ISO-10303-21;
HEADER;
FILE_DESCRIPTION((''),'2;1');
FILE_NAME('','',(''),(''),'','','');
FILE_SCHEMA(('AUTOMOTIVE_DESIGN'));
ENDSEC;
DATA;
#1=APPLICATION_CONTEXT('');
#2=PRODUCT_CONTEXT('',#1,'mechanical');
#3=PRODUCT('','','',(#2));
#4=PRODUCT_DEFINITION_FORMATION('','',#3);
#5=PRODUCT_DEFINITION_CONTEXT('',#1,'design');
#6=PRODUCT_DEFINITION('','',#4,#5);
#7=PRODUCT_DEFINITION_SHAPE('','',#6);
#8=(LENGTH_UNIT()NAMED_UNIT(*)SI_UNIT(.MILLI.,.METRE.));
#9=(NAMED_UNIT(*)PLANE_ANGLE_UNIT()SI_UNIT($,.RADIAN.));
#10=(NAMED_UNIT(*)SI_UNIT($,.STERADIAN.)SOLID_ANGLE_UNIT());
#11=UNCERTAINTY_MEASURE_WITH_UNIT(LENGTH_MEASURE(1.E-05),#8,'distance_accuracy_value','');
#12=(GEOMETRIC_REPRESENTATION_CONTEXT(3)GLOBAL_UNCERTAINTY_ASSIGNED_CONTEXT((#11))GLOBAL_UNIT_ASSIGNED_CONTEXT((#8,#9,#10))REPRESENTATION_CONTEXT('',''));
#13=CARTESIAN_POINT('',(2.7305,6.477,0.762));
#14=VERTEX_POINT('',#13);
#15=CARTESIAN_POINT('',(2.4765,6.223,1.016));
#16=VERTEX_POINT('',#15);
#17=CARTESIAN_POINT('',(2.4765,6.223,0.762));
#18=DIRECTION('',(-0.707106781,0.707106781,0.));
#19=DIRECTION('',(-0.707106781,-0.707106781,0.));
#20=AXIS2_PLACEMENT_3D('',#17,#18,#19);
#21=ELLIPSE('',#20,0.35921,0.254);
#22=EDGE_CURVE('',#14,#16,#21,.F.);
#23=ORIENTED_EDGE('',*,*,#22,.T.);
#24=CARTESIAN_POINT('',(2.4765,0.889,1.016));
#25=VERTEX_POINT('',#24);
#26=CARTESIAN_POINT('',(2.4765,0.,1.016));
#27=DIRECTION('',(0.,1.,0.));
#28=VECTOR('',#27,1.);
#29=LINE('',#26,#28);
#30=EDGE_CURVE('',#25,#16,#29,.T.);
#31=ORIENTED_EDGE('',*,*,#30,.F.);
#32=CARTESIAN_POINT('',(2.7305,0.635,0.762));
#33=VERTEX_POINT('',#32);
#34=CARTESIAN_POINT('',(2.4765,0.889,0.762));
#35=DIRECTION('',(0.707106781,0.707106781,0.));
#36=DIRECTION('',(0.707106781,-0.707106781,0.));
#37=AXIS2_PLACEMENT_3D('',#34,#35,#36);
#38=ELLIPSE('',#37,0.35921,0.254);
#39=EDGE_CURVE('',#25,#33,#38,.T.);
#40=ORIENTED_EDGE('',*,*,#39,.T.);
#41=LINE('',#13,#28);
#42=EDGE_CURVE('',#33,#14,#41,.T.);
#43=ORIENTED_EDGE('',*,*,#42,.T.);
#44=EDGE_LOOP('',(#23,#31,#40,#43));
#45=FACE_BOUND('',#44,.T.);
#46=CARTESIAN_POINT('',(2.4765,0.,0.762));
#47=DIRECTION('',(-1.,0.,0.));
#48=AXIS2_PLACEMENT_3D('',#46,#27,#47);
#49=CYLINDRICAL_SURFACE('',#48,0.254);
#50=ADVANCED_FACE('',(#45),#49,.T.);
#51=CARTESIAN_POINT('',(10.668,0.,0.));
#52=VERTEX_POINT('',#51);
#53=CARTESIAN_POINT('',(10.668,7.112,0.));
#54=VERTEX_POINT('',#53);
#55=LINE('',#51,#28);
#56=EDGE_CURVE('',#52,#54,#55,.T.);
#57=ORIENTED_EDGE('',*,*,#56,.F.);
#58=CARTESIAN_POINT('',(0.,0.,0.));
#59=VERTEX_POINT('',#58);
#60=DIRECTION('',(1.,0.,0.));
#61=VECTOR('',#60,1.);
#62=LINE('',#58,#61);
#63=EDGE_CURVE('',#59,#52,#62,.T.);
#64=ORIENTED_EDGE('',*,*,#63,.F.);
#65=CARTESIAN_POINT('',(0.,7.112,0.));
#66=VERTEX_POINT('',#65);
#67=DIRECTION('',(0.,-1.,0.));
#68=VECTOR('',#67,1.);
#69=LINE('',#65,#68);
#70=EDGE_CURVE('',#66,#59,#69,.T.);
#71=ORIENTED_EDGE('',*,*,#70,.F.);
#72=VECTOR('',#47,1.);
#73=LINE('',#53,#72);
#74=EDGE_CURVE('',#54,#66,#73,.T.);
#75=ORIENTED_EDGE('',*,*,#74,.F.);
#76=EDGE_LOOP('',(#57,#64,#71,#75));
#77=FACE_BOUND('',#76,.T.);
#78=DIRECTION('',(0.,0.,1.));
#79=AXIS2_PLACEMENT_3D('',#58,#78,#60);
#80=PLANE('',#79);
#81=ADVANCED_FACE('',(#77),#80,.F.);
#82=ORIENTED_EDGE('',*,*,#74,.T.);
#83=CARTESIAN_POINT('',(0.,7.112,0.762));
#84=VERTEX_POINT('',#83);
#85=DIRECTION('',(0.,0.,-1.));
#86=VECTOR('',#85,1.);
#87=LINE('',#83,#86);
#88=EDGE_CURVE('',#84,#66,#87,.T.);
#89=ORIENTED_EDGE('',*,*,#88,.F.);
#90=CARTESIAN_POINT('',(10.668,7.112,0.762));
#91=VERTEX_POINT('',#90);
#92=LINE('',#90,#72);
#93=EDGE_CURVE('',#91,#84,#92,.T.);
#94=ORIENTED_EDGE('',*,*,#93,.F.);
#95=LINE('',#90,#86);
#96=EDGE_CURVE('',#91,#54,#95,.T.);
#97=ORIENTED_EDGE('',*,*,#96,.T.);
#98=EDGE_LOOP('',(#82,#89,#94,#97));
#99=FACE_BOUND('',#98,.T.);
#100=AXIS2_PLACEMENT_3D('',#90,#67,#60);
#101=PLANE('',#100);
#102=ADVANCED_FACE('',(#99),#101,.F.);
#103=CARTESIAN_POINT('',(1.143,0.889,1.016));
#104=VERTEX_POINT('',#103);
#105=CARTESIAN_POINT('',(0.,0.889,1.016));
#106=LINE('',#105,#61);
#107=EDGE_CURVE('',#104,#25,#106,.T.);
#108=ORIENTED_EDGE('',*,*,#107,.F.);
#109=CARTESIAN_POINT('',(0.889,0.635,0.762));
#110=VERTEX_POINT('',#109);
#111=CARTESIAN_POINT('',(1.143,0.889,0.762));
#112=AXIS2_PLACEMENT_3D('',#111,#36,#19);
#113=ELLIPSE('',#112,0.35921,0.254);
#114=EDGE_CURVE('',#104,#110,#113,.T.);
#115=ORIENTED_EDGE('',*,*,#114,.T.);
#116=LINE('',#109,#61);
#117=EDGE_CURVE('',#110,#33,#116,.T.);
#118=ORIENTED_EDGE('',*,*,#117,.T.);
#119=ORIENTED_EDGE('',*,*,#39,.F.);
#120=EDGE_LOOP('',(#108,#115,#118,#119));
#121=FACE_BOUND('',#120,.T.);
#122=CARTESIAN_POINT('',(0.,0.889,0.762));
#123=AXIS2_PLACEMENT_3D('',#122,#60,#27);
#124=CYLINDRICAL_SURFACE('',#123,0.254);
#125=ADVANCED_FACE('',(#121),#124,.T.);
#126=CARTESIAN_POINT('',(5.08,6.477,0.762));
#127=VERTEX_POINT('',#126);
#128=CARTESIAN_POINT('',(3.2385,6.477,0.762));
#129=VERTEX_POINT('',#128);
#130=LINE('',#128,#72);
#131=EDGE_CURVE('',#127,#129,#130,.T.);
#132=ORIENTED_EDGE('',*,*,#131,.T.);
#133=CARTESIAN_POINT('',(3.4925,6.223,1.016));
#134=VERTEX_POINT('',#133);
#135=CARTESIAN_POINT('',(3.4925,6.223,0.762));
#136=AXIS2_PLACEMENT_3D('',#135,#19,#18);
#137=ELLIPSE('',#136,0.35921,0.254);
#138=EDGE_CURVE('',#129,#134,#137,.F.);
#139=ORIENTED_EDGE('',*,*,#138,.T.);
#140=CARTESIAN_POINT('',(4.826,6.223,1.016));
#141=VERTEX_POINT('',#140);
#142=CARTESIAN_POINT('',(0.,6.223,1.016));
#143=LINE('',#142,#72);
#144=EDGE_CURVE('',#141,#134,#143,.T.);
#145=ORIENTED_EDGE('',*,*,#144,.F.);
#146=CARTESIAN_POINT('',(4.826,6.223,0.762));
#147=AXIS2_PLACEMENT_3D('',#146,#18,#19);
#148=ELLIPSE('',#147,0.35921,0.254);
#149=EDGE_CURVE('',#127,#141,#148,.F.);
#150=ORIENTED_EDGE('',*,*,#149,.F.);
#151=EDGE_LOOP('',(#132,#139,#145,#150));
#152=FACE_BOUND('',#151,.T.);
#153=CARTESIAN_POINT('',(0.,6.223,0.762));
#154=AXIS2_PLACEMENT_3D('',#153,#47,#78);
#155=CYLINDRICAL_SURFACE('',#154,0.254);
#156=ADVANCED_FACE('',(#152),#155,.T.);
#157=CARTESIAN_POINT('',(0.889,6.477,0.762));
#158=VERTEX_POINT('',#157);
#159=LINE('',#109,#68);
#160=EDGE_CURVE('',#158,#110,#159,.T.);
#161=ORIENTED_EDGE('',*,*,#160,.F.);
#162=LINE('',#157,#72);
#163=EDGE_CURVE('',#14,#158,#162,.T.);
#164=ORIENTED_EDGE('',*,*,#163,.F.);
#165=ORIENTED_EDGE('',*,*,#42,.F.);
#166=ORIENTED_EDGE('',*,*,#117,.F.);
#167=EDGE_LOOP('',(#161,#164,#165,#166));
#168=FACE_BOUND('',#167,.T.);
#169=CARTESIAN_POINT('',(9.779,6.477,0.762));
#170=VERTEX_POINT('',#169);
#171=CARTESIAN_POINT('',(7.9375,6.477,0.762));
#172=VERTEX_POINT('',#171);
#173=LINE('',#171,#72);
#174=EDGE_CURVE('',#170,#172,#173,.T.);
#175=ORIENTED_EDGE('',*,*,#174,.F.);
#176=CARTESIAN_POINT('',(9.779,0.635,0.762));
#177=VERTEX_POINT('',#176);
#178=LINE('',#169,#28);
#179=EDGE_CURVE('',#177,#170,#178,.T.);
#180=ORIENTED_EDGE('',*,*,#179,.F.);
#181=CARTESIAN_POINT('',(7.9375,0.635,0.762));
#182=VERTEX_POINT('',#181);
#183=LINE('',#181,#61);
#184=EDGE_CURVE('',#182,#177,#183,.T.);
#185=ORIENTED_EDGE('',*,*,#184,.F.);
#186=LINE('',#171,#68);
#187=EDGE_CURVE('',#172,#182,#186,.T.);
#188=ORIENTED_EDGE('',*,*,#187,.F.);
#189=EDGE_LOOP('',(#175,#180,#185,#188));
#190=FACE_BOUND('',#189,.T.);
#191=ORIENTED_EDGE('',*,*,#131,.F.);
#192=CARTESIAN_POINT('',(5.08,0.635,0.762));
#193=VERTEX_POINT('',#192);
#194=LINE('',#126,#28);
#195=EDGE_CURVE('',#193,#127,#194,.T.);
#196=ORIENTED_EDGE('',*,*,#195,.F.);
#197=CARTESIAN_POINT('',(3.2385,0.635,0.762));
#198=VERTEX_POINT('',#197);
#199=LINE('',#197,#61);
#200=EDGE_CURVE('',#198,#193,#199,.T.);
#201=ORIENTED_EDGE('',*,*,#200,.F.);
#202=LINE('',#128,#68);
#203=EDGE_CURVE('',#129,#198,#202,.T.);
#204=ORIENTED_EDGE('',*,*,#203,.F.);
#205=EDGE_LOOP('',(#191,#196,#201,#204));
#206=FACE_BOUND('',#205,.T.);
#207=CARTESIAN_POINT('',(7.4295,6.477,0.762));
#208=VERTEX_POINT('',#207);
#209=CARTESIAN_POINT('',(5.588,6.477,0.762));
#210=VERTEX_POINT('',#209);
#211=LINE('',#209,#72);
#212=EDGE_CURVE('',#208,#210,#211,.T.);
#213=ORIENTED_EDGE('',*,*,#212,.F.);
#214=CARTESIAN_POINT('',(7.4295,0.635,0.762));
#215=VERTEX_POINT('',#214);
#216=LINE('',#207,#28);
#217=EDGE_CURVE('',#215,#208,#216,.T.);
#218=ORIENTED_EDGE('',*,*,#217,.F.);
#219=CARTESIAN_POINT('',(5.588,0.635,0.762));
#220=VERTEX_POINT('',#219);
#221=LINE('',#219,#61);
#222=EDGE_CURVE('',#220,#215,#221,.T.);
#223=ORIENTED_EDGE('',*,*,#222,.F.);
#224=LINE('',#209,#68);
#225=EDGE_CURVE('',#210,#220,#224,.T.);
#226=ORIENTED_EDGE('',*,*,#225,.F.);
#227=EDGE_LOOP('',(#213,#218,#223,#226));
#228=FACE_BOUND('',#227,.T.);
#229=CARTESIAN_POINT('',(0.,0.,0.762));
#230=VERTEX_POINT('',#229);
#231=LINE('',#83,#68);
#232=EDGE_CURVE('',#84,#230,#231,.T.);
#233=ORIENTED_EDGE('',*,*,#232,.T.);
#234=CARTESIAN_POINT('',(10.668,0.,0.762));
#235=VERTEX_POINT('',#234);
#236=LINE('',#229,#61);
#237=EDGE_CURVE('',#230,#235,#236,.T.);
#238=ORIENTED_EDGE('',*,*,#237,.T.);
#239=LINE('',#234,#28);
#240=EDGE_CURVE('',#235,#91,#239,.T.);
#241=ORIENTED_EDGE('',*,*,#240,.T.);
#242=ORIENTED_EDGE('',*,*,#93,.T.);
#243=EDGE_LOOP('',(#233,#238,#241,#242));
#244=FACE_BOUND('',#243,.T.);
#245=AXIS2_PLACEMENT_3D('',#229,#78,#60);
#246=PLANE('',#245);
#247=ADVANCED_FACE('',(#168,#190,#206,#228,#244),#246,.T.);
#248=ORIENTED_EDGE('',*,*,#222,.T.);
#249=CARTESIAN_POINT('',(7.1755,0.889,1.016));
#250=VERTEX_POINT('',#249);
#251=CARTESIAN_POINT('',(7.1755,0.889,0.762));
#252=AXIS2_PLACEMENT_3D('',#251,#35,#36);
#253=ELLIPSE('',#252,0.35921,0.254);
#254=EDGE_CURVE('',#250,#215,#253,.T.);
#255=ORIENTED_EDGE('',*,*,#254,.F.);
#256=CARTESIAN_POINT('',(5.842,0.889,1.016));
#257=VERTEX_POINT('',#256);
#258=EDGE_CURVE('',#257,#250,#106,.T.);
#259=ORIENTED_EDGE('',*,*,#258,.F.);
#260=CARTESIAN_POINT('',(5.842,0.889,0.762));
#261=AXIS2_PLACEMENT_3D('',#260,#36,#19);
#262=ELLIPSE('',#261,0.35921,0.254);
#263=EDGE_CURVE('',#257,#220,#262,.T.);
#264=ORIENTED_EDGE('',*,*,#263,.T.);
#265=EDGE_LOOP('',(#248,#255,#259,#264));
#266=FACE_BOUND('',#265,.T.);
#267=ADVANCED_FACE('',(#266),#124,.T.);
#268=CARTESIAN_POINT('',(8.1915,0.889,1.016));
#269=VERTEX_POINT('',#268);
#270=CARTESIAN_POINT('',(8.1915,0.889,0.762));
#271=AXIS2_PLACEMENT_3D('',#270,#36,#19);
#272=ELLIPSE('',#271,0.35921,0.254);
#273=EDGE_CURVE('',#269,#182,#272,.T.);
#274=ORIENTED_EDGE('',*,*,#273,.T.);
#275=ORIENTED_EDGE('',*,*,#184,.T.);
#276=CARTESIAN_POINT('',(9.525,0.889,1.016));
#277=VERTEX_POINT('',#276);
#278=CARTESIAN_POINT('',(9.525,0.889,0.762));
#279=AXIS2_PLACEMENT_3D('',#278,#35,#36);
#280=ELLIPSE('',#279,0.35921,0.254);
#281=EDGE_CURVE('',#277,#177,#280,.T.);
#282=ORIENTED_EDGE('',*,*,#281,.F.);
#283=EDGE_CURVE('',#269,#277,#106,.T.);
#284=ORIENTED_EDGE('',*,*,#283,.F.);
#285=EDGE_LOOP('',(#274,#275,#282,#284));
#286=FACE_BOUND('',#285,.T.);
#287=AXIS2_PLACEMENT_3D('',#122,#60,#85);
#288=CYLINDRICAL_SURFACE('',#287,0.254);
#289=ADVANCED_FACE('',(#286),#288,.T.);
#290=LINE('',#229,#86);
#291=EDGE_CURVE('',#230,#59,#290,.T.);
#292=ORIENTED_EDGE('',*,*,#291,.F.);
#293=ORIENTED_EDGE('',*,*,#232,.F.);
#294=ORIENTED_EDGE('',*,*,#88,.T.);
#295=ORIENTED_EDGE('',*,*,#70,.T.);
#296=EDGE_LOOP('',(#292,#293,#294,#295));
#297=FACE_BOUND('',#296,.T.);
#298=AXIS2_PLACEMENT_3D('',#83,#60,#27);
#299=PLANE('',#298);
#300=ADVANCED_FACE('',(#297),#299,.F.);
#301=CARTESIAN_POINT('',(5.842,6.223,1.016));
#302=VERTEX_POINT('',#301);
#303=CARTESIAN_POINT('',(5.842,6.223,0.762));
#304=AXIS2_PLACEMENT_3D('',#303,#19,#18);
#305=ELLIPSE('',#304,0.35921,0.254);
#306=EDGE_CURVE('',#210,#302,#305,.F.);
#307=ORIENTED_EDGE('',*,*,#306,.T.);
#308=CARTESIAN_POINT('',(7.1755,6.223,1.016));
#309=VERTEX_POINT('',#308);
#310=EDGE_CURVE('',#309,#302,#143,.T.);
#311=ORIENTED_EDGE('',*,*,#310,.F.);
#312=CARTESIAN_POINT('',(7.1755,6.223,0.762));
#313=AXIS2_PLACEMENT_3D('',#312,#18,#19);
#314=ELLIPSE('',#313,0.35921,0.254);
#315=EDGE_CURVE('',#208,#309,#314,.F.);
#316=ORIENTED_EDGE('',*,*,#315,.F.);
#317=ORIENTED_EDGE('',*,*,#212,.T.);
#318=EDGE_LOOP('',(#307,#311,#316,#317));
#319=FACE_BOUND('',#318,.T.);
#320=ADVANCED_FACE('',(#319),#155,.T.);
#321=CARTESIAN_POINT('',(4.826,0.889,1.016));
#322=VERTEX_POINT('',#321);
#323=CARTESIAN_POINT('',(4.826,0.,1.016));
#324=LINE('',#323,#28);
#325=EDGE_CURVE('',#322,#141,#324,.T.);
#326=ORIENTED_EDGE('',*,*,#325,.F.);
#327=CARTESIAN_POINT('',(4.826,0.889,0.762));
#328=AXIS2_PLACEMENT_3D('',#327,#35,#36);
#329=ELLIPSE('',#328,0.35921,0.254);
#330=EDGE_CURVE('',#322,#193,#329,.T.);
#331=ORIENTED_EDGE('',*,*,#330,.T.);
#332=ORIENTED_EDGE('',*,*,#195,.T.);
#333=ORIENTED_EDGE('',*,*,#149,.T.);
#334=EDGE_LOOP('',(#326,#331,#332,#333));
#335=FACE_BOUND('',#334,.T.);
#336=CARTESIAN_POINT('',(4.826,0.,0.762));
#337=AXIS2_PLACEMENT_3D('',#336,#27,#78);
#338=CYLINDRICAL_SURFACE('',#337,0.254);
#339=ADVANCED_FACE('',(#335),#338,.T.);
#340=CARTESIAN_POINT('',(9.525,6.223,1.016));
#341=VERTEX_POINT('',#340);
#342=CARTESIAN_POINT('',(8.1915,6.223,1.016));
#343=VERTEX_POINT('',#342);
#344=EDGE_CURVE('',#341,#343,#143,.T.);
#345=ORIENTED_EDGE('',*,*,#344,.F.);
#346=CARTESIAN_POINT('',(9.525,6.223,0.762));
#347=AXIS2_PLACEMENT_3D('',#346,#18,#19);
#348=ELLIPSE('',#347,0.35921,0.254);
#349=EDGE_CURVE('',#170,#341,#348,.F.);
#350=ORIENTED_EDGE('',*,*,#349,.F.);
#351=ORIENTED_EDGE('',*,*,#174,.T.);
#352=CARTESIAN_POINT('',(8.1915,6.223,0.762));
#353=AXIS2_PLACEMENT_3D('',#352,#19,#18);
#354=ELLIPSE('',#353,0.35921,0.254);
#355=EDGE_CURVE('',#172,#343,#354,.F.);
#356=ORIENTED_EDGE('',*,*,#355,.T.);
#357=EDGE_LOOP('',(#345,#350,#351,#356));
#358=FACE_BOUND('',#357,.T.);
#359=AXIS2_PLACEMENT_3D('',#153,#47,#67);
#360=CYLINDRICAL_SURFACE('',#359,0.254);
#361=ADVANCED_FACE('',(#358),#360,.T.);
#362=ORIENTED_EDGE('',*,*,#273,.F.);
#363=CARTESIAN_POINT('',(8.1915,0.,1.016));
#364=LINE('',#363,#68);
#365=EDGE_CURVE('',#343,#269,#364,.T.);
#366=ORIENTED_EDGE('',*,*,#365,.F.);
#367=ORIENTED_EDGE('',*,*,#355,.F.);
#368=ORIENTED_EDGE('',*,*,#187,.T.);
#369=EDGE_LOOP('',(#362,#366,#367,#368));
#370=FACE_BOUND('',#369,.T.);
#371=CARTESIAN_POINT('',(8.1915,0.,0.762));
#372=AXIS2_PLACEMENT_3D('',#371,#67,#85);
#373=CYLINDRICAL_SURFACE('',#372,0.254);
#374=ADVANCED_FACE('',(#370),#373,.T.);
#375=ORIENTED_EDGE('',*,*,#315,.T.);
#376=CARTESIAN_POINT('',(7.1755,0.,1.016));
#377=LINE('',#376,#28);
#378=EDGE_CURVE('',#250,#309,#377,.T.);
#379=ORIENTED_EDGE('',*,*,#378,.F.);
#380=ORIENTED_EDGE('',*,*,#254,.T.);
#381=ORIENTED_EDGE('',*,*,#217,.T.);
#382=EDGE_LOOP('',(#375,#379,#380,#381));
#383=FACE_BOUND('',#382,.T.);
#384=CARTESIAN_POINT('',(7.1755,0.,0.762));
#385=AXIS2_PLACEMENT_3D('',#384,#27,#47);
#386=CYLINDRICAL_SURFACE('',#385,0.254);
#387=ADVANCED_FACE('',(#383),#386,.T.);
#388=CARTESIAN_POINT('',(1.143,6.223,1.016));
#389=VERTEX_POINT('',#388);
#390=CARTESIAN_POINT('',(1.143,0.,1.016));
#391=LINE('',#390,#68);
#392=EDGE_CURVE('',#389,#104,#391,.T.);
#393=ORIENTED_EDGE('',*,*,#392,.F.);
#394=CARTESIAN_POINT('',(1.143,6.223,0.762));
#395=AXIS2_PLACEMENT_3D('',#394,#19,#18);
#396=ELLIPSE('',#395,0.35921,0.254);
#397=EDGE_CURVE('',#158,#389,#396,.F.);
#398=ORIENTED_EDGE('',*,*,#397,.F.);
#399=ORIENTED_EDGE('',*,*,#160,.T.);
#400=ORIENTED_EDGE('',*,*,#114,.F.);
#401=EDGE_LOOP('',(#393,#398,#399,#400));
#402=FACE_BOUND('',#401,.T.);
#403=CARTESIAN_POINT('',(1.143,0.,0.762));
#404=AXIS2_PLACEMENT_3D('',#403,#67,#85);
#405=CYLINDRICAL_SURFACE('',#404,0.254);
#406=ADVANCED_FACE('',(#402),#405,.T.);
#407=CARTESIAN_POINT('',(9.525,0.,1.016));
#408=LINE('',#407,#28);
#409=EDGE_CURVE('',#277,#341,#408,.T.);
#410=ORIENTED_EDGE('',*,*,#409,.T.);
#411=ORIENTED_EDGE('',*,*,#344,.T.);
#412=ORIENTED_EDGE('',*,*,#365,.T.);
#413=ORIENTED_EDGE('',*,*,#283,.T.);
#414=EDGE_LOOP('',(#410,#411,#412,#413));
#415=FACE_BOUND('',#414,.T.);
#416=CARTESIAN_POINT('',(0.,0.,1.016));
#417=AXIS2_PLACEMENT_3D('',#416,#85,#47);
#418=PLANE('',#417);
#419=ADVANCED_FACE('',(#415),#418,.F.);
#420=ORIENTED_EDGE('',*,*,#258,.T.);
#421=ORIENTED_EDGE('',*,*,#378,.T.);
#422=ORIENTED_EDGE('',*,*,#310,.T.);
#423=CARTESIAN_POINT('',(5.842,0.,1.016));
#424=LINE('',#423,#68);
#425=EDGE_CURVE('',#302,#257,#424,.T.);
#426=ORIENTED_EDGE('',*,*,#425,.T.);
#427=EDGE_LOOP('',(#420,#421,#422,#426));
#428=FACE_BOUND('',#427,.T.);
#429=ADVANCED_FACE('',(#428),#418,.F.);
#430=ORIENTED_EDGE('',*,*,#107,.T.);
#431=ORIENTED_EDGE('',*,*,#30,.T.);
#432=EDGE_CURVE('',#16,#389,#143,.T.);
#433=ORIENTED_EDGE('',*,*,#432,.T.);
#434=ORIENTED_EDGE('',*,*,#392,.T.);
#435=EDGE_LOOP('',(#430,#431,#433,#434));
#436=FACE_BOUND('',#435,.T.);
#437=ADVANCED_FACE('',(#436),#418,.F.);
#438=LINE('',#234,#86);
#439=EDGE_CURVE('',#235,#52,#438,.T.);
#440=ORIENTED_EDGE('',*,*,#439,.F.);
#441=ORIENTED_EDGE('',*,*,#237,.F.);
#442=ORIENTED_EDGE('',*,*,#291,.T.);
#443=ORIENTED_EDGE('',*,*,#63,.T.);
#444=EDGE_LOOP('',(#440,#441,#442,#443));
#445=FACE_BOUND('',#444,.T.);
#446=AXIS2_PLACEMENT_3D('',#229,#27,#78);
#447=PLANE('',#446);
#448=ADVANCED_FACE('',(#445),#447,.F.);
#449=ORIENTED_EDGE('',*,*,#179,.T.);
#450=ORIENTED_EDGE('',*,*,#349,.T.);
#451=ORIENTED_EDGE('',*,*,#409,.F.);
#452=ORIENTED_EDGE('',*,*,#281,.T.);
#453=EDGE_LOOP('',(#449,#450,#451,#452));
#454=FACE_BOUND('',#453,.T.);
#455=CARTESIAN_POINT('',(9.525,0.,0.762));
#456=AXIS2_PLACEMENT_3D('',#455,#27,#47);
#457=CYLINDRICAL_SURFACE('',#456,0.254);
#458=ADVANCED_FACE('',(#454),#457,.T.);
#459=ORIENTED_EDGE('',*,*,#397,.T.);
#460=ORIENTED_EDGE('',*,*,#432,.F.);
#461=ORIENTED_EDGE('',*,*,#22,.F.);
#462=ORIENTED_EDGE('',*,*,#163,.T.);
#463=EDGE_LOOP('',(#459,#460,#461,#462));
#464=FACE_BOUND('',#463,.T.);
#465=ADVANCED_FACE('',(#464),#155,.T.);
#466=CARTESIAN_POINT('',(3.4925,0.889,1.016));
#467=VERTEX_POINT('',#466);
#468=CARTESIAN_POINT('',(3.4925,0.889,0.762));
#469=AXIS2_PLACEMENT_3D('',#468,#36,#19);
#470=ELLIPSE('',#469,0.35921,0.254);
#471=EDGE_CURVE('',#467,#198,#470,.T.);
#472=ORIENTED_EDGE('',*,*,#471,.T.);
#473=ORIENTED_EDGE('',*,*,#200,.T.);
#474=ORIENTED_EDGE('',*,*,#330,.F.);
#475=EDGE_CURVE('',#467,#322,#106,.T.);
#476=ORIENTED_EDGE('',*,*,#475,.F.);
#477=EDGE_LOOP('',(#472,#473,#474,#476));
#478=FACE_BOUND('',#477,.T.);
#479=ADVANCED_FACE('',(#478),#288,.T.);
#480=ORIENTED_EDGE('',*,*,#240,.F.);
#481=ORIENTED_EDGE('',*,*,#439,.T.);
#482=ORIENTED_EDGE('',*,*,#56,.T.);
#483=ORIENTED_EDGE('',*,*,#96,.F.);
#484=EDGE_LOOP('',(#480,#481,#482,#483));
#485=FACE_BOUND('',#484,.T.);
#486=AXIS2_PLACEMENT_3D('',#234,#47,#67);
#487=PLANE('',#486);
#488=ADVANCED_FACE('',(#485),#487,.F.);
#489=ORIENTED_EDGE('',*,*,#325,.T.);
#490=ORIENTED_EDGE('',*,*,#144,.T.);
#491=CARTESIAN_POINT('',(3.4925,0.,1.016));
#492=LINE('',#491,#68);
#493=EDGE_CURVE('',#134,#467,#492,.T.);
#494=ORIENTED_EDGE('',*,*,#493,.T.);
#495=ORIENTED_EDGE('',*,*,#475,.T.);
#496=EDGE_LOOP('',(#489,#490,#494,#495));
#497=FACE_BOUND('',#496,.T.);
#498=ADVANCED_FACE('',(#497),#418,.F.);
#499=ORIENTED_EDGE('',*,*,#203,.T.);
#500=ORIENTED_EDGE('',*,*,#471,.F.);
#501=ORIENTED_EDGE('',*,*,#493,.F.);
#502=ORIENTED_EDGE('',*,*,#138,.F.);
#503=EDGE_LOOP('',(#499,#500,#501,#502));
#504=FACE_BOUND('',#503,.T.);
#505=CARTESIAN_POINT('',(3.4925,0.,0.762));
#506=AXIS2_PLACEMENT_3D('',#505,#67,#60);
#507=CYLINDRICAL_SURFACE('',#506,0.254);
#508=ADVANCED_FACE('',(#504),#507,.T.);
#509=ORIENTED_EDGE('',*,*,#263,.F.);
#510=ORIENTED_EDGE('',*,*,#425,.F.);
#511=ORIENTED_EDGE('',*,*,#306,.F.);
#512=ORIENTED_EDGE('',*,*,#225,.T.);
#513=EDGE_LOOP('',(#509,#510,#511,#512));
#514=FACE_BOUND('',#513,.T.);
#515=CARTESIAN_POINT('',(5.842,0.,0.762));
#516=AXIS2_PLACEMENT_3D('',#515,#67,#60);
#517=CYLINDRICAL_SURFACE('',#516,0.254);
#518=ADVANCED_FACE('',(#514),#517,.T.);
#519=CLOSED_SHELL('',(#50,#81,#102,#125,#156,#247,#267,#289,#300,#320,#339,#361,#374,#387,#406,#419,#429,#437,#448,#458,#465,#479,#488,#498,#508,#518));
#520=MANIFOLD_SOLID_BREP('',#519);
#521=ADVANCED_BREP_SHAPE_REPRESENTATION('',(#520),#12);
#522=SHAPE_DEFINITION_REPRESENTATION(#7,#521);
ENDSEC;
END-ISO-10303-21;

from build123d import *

# Parameters (mm, degrees)
SKETCH1_W           = 10.668
SKETCH1_H           = 7.112
BOSS_EXTRUDE1_DEPTH = 0.762
SKETCH2_W           = 1.8415
SKETCH2_H           = 5.842
BOSS_EXTRUDE2_DEPTH = 0.254
FILLET1_R           = 0.254


with BuildPart() as part:
    # Sketch1 → Boss-Extrude1 (new body)
    with BuildSketch(Plane.XY):
        with Locations((5.334, 3.556)):
            Rectangle(SKETCH1_W, SKETCH1_H)
    extrude(amount=BOSS_EXTRUDE1_DEPTH)

    # Sketch2 → Boss-Extrude2 (add)
    with BuildSketch(Plane.XY.offset(0.762)):
        with Locations((8.85825, 3.556)):
            Rectangle(SKETCH2_W, SKETCH2_H)
        with Locations((1.80975, 3.556)):
            Rectangle(SKETCH2_W, SKETCH2_H)
        with Locations((4.15925, 3.556)):
            Rectangle(SKETCH2_W, SKETCH2_H)
        with Locations((6.50875, 3.556)):
            Rectangle(SKETCH2_W, SKETCH2_H)
    extrude(amount=BOSS_EXTRUDE2_DEPTH)

    # Fillet1
    fillet1_edges = [part.edges().sort_by_distance(p)[0] for p in [
        (2.7305, 3.556, 1.016),
        (1.80975, 0.635, 1.016),
        (0.889, 3.556, 1.016),
        (1.80975, 6.477, 1.016),
        (5.08, 3.556, 1.016),
        (4.15925, 0.635, 1.016),
        (3.2385, 3.556, 1.016),
        (4.15925, 6.477, 1.016),
        (9.779, 3.556, 1.016),
        (8.85825, 0.635, 1.016),
        (7.9375, 3.556, 1.016),
        (8.85825, 6.477, 1.016),
        (7.4295, 3.556, 1.016),
        (6.50875, 0.635, 1.016),
        (5.588, 3.556, 1.016),
        (6.50875, 6.477, 1.016),
    ]]
    fillet(fillet1_edges, radius=FILLET1_R - 0.0001)  # a hair under: the kernel refuses the full size


solid = part.part
